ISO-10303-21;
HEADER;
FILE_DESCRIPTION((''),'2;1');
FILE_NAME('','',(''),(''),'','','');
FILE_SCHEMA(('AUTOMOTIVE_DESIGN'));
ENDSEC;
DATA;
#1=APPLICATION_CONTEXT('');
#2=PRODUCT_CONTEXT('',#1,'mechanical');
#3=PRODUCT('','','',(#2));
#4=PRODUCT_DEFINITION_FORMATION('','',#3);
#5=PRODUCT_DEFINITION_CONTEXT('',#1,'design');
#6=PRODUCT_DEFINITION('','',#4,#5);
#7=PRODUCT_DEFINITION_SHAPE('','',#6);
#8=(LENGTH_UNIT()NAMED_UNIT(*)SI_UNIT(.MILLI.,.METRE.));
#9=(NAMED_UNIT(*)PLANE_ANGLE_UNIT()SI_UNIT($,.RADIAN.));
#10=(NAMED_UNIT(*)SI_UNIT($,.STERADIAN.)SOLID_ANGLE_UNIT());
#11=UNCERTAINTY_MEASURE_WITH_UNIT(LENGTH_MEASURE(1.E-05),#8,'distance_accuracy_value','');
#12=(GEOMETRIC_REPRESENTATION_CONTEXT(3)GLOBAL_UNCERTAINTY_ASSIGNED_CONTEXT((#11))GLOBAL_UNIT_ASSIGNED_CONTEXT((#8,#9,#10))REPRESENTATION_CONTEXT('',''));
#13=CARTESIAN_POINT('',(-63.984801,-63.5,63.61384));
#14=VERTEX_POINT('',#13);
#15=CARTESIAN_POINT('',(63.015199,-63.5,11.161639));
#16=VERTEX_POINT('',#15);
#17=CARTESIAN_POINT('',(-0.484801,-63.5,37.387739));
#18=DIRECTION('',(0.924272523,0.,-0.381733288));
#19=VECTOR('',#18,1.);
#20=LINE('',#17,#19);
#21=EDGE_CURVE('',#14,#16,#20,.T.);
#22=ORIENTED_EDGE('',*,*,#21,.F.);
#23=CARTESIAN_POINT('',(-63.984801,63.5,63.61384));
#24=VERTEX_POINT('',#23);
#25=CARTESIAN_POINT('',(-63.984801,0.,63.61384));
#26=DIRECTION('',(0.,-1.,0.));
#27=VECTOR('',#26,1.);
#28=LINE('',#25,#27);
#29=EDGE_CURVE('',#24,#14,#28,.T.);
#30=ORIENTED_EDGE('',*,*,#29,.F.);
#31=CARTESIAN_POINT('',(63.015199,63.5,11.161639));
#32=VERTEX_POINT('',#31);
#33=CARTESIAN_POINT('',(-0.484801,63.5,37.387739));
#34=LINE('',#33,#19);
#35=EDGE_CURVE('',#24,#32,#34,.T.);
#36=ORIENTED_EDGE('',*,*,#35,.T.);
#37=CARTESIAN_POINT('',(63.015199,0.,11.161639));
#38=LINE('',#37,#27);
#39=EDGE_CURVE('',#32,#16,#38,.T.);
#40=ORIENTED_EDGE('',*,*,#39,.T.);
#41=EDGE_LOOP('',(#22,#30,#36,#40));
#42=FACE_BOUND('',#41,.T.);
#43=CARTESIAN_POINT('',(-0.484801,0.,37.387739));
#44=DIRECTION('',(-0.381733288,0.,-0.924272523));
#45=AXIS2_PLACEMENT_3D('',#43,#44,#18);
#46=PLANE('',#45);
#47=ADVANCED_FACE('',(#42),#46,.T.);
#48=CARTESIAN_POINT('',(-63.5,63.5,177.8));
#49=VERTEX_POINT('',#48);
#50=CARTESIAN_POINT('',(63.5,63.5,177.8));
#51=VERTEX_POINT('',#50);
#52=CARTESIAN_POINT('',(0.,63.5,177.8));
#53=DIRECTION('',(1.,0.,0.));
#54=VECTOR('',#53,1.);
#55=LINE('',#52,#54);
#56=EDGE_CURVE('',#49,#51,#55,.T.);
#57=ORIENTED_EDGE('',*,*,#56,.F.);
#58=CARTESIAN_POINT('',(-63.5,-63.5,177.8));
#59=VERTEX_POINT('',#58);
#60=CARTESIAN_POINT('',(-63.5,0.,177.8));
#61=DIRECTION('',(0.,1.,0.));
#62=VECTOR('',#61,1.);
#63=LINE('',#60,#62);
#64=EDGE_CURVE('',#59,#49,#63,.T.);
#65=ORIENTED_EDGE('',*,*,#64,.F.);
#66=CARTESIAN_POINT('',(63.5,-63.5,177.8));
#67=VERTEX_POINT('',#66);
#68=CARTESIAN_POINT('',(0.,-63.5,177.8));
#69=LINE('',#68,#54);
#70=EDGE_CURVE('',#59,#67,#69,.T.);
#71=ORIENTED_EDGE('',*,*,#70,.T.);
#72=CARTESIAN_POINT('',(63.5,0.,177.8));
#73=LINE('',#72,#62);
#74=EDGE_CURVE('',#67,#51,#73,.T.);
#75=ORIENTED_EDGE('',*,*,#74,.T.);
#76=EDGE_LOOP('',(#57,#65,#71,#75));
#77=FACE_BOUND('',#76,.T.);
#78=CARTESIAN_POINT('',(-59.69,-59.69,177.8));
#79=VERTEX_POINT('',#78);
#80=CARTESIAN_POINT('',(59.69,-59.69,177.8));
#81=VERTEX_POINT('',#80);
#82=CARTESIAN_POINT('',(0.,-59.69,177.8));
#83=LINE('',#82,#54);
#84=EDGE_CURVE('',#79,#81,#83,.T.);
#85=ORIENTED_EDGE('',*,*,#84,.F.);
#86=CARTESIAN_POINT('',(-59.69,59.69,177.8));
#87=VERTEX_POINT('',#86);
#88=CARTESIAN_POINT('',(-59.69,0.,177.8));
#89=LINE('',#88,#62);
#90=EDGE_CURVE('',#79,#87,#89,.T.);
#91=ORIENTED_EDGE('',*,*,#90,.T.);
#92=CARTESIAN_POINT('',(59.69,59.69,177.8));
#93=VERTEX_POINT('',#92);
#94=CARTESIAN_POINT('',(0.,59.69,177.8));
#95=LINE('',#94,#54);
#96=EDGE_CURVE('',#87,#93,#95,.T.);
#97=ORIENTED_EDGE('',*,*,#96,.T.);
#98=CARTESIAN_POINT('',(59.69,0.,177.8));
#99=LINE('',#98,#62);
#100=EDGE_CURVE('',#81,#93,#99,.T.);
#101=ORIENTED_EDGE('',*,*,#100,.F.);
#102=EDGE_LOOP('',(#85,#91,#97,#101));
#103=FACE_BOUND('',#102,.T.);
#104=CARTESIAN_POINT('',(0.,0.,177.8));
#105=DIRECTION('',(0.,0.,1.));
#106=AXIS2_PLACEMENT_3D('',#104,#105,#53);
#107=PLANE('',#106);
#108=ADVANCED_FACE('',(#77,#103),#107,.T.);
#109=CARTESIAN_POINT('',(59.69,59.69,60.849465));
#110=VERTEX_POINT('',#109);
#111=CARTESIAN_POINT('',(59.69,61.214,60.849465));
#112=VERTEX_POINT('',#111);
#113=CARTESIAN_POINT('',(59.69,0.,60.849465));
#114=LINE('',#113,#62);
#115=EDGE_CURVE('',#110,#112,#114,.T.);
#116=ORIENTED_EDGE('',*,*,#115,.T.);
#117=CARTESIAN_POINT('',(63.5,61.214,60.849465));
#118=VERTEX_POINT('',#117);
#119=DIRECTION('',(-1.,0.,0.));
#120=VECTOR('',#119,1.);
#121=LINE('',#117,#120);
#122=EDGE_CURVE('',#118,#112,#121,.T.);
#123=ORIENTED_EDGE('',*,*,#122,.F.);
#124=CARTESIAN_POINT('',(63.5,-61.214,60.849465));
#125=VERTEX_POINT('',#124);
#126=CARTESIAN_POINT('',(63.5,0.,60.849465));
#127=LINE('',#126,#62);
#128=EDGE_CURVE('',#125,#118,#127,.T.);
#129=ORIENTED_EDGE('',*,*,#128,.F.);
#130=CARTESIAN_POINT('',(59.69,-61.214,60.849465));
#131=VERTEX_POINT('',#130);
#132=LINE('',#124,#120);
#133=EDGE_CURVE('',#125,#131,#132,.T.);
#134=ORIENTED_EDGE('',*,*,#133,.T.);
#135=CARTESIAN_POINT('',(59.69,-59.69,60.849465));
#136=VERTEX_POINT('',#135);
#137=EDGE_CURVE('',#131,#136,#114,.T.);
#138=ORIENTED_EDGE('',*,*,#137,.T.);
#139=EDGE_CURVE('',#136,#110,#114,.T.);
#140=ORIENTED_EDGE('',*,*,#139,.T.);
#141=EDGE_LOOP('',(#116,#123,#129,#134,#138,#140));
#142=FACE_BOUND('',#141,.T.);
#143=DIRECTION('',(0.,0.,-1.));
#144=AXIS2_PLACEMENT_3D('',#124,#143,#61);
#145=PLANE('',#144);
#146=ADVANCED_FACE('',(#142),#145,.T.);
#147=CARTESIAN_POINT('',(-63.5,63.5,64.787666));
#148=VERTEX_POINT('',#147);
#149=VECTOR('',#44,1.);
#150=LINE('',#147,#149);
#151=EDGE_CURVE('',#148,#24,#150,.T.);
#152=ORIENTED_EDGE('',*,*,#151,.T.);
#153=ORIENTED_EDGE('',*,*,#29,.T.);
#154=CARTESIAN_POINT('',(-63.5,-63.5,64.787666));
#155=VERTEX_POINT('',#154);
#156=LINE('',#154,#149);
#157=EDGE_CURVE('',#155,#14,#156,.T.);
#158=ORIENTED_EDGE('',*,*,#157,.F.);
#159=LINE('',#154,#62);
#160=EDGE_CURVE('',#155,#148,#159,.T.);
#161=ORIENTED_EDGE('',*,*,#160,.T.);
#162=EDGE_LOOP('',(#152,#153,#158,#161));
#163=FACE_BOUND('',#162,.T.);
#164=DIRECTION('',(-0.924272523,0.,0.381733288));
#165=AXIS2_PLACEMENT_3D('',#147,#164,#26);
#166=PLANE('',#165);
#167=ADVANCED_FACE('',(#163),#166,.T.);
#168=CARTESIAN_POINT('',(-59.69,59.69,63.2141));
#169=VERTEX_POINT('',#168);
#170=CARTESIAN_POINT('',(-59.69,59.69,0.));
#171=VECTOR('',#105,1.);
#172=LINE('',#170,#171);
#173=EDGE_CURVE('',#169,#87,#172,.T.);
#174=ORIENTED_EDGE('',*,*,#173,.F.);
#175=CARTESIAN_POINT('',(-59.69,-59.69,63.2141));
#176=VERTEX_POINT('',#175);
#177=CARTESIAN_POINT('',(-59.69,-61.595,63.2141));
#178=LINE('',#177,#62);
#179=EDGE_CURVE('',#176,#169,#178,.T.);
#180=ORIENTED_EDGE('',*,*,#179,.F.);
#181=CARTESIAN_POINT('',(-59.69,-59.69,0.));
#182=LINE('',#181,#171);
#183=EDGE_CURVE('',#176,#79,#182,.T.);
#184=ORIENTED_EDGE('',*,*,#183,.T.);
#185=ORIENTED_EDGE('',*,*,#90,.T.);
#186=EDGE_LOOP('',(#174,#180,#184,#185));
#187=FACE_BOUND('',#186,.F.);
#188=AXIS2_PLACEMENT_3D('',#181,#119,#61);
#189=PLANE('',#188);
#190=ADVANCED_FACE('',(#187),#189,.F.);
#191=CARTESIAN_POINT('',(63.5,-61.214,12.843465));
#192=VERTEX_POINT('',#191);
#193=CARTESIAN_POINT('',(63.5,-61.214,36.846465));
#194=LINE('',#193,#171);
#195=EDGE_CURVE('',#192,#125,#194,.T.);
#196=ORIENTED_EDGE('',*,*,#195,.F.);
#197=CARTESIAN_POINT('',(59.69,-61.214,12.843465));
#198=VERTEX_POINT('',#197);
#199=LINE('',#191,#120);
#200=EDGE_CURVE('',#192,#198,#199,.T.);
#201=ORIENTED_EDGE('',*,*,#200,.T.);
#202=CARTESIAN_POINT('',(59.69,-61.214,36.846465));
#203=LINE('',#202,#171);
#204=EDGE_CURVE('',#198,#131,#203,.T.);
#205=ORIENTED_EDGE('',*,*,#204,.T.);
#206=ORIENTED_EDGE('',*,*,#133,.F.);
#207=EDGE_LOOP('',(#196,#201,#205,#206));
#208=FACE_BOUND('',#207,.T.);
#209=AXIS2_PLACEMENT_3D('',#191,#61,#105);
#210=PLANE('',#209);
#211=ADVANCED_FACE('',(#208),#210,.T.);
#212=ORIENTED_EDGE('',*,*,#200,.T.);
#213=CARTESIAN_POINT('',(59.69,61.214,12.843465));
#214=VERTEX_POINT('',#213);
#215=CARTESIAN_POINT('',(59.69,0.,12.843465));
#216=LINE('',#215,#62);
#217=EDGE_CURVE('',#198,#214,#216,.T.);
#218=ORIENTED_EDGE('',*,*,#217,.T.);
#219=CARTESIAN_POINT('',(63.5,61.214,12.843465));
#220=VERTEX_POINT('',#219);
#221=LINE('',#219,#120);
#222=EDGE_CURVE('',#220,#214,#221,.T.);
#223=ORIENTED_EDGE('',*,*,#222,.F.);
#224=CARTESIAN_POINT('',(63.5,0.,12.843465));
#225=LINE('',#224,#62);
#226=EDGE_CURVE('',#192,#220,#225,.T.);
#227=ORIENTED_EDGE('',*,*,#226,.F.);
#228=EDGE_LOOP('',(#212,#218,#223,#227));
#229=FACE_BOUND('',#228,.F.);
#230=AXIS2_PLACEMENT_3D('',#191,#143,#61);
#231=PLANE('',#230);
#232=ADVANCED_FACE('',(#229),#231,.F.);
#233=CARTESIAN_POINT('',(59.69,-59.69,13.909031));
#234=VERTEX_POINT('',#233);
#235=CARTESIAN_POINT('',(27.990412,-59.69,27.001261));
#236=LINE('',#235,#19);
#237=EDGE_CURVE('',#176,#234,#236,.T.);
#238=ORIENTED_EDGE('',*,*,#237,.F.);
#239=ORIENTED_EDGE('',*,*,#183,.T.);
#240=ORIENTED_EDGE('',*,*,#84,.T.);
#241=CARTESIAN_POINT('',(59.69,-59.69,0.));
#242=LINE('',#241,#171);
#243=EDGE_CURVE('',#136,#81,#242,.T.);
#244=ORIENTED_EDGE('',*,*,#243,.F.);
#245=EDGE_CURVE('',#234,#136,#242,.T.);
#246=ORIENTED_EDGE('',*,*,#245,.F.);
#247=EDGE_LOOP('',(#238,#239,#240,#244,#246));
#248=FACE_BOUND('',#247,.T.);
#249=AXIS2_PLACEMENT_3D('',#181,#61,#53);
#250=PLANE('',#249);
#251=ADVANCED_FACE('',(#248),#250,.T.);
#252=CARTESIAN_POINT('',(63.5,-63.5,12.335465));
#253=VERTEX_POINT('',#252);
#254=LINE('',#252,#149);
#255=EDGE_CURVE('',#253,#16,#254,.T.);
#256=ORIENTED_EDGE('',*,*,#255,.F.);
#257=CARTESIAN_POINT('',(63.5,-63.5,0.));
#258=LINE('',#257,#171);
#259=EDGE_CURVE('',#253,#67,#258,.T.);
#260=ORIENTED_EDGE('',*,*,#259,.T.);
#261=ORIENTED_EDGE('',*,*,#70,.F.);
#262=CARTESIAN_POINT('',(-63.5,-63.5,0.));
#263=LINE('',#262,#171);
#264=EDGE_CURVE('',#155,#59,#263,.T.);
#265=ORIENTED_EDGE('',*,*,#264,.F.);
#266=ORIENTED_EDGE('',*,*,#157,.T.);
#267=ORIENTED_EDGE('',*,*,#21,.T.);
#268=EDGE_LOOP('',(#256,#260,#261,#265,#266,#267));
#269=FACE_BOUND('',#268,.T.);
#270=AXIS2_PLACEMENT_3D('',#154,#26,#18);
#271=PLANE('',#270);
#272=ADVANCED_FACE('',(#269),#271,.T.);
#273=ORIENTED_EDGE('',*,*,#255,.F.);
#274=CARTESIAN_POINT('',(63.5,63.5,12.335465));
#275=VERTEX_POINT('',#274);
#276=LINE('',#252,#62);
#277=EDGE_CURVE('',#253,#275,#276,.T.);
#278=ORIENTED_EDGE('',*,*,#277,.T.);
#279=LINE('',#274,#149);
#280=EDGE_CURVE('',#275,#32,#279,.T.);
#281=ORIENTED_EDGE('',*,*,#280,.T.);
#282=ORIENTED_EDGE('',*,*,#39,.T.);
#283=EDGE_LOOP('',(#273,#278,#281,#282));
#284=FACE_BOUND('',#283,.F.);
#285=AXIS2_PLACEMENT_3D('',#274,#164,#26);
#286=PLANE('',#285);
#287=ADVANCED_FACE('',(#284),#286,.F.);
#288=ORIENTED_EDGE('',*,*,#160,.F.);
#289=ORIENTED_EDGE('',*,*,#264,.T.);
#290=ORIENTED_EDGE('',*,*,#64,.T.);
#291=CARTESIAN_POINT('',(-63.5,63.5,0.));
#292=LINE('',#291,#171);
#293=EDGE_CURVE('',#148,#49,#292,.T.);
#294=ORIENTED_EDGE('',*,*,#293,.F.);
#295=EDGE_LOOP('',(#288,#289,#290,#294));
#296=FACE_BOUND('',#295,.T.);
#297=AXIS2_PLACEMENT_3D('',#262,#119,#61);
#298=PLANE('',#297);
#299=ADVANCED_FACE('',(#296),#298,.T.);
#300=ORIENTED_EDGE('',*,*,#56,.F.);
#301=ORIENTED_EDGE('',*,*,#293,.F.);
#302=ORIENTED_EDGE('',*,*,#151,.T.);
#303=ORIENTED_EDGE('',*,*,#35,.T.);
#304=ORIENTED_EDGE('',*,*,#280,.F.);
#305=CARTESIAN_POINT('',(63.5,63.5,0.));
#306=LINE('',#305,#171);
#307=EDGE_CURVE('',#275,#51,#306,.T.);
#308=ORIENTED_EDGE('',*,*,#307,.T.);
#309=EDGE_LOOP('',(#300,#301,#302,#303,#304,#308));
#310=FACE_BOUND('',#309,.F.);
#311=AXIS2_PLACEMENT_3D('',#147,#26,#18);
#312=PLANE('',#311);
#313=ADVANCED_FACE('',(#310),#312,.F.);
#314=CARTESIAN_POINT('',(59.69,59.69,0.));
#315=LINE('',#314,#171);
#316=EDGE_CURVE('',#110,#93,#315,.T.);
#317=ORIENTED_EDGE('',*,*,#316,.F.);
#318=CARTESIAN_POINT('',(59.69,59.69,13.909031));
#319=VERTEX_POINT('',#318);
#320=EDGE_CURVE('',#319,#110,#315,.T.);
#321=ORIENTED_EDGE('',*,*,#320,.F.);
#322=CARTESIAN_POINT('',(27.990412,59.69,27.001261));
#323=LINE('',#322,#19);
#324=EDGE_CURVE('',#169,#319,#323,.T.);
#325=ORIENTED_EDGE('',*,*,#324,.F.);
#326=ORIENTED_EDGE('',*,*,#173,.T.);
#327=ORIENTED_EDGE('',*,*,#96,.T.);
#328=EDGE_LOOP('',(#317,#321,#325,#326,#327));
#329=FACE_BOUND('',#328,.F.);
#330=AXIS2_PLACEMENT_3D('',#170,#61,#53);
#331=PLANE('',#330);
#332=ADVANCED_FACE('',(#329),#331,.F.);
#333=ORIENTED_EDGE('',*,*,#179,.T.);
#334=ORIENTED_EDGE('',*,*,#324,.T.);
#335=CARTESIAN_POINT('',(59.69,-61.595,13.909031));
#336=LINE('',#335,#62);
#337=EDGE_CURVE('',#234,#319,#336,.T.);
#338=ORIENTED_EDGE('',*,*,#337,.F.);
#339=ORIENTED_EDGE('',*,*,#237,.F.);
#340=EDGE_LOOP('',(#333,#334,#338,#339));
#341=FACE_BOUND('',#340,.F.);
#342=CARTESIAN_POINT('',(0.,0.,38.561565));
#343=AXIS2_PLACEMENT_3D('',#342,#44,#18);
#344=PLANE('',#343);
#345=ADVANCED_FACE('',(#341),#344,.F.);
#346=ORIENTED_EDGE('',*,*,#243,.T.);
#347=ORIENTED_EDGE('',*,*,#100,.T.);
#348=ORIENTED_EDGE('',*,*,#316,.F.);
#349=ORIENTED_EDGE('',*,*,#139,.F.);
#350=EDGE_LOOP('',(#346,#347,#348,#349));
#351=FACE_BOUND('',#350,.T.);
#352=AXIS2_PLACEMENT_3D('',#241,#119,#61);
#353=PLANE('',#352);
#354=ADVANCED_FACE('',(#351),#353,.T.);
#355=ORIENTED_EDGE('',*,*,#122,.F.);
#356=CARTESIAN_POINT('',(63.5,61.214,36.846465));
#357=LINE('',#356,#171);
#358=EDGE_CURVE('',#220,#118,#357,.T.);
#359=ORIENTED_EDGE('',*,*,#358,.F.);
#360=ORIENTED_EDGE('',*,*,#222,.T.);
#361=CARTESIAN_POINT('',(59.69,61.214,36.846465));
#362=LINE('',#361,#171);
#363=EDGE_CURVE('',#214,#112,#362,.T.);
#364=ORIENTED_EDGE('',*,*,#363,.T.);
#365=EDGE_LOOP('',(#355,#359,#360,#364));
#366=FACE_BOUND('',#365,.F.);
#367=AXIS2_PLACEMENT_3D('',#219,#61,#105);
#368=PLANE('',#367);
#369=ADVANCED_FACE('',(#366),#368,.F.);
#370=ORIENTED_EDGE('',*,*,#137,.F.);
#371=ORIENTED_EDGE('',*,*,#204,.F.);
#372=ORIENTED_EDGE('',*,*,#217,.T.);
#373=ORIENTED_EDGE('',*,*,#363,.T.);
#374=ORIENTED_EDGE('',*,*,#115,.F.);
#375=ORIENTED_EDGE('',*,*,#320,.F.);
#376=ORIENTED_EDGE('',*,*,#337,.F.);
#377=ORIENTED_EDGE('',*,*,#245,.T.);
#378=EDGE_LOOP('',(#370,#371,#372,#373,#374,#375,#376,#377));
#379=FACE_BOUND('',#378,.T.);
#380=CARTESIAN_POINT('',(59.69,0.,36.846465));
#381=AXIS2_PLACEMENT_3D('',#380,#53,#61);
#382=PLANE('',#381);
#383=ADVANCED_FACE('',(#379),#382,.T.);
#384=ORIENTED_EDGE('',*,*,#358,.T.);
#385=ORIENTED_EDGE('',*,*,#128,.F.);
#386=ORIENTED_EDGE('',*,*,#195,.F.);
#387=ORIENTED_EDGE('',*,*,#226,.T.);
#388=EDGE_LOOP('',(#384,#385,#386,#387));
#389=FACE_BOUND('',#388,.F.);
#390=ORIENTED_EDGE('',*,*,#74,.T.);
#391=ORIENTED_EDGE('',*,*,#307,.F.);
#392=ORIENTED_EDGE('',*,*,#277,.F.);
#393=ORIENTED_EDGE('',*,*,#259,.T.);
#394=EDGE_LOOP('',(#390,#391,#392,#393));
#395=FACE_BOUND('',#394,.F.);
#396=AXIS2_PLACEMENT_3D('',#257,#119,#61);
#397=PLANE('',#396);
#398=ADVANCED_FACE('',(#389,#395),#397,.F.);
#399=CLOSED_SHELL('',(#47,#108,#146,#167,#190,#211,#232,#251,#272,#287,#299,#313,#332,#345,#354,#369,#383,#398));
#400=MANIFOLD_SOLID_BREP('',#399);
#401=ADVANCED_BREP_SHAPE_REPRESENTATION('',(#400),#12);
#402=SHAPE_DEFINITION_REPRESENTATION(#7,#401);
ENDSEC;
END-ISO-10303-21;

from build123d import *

# Parameters (mm, degrees)
F0_W      = 127
F0_H      = 127
F0_W_2    = 119.38
F0_H_2    = 119.38
F1_DEPTH  = 177.8
F10_DEPTH = 127.001
F11_W     = 137.4053613401
F11_H     = 127
F12_DEPTH = 1.27
F13_W     = 122.4279999733
F13_H     = 48.0059999866
F14_DEPTH = 3.81


# Not quite as in the source:
# - a feature of the source that left no trace in its solid (it failed there, or was rolled back) is left out
# - a feature names something its author has since deleted; it is built from what else it names


with BuildPart() as f1:
    # F0 (on Top) → F1 (new body)
    with BuildSketch(Plane.XY):
        Rectangle(F0_W, F0_H)
        Rectangle(F0_W_2, F0_H_2, mode=Mode.SUBTRACT)
    extrude(amount=F1_DEPTH)

    # F8: union 

    # F9 (on face) → F10 (cut, through all)
    with BuildSketch(Plane.XZ.offset(63.5)):
        Polygon((75.6702050567, -13.2453246042), (93.3672711253, 0), (-89.8822396994, 75.6837800145), (-89.8822396994, -21.479823067), align=None)
    extrude(amount=-F10_DEPTH, mode=Mode.SUBTRACT)

    # F11 (on face) → F12 (join)
    with BuildSketch(Plane(origin=(13.6055070593, 0, 32.9423624542), x_dir=(0.924272523, 0, -0.3817332881), z_dir=(-0.3817332881, 0, -0.924272523))):
        with Locations((-14.7202331787, 0)):
            Rectangle(F11_W, F11_H)
    extrude(amount=F12_DEPTH)

    # F13 (on face) → F14 (cut)
    with BuildSketch(Plane.YZ.offset(63.5)):
        with Locations((0, 36.8464652686)):
            Rectangle(F13_W, F13_H)
    extrude(amount=-F14_DEPTH, mode=Mode.SUBTRACT)


solid = f1.part
